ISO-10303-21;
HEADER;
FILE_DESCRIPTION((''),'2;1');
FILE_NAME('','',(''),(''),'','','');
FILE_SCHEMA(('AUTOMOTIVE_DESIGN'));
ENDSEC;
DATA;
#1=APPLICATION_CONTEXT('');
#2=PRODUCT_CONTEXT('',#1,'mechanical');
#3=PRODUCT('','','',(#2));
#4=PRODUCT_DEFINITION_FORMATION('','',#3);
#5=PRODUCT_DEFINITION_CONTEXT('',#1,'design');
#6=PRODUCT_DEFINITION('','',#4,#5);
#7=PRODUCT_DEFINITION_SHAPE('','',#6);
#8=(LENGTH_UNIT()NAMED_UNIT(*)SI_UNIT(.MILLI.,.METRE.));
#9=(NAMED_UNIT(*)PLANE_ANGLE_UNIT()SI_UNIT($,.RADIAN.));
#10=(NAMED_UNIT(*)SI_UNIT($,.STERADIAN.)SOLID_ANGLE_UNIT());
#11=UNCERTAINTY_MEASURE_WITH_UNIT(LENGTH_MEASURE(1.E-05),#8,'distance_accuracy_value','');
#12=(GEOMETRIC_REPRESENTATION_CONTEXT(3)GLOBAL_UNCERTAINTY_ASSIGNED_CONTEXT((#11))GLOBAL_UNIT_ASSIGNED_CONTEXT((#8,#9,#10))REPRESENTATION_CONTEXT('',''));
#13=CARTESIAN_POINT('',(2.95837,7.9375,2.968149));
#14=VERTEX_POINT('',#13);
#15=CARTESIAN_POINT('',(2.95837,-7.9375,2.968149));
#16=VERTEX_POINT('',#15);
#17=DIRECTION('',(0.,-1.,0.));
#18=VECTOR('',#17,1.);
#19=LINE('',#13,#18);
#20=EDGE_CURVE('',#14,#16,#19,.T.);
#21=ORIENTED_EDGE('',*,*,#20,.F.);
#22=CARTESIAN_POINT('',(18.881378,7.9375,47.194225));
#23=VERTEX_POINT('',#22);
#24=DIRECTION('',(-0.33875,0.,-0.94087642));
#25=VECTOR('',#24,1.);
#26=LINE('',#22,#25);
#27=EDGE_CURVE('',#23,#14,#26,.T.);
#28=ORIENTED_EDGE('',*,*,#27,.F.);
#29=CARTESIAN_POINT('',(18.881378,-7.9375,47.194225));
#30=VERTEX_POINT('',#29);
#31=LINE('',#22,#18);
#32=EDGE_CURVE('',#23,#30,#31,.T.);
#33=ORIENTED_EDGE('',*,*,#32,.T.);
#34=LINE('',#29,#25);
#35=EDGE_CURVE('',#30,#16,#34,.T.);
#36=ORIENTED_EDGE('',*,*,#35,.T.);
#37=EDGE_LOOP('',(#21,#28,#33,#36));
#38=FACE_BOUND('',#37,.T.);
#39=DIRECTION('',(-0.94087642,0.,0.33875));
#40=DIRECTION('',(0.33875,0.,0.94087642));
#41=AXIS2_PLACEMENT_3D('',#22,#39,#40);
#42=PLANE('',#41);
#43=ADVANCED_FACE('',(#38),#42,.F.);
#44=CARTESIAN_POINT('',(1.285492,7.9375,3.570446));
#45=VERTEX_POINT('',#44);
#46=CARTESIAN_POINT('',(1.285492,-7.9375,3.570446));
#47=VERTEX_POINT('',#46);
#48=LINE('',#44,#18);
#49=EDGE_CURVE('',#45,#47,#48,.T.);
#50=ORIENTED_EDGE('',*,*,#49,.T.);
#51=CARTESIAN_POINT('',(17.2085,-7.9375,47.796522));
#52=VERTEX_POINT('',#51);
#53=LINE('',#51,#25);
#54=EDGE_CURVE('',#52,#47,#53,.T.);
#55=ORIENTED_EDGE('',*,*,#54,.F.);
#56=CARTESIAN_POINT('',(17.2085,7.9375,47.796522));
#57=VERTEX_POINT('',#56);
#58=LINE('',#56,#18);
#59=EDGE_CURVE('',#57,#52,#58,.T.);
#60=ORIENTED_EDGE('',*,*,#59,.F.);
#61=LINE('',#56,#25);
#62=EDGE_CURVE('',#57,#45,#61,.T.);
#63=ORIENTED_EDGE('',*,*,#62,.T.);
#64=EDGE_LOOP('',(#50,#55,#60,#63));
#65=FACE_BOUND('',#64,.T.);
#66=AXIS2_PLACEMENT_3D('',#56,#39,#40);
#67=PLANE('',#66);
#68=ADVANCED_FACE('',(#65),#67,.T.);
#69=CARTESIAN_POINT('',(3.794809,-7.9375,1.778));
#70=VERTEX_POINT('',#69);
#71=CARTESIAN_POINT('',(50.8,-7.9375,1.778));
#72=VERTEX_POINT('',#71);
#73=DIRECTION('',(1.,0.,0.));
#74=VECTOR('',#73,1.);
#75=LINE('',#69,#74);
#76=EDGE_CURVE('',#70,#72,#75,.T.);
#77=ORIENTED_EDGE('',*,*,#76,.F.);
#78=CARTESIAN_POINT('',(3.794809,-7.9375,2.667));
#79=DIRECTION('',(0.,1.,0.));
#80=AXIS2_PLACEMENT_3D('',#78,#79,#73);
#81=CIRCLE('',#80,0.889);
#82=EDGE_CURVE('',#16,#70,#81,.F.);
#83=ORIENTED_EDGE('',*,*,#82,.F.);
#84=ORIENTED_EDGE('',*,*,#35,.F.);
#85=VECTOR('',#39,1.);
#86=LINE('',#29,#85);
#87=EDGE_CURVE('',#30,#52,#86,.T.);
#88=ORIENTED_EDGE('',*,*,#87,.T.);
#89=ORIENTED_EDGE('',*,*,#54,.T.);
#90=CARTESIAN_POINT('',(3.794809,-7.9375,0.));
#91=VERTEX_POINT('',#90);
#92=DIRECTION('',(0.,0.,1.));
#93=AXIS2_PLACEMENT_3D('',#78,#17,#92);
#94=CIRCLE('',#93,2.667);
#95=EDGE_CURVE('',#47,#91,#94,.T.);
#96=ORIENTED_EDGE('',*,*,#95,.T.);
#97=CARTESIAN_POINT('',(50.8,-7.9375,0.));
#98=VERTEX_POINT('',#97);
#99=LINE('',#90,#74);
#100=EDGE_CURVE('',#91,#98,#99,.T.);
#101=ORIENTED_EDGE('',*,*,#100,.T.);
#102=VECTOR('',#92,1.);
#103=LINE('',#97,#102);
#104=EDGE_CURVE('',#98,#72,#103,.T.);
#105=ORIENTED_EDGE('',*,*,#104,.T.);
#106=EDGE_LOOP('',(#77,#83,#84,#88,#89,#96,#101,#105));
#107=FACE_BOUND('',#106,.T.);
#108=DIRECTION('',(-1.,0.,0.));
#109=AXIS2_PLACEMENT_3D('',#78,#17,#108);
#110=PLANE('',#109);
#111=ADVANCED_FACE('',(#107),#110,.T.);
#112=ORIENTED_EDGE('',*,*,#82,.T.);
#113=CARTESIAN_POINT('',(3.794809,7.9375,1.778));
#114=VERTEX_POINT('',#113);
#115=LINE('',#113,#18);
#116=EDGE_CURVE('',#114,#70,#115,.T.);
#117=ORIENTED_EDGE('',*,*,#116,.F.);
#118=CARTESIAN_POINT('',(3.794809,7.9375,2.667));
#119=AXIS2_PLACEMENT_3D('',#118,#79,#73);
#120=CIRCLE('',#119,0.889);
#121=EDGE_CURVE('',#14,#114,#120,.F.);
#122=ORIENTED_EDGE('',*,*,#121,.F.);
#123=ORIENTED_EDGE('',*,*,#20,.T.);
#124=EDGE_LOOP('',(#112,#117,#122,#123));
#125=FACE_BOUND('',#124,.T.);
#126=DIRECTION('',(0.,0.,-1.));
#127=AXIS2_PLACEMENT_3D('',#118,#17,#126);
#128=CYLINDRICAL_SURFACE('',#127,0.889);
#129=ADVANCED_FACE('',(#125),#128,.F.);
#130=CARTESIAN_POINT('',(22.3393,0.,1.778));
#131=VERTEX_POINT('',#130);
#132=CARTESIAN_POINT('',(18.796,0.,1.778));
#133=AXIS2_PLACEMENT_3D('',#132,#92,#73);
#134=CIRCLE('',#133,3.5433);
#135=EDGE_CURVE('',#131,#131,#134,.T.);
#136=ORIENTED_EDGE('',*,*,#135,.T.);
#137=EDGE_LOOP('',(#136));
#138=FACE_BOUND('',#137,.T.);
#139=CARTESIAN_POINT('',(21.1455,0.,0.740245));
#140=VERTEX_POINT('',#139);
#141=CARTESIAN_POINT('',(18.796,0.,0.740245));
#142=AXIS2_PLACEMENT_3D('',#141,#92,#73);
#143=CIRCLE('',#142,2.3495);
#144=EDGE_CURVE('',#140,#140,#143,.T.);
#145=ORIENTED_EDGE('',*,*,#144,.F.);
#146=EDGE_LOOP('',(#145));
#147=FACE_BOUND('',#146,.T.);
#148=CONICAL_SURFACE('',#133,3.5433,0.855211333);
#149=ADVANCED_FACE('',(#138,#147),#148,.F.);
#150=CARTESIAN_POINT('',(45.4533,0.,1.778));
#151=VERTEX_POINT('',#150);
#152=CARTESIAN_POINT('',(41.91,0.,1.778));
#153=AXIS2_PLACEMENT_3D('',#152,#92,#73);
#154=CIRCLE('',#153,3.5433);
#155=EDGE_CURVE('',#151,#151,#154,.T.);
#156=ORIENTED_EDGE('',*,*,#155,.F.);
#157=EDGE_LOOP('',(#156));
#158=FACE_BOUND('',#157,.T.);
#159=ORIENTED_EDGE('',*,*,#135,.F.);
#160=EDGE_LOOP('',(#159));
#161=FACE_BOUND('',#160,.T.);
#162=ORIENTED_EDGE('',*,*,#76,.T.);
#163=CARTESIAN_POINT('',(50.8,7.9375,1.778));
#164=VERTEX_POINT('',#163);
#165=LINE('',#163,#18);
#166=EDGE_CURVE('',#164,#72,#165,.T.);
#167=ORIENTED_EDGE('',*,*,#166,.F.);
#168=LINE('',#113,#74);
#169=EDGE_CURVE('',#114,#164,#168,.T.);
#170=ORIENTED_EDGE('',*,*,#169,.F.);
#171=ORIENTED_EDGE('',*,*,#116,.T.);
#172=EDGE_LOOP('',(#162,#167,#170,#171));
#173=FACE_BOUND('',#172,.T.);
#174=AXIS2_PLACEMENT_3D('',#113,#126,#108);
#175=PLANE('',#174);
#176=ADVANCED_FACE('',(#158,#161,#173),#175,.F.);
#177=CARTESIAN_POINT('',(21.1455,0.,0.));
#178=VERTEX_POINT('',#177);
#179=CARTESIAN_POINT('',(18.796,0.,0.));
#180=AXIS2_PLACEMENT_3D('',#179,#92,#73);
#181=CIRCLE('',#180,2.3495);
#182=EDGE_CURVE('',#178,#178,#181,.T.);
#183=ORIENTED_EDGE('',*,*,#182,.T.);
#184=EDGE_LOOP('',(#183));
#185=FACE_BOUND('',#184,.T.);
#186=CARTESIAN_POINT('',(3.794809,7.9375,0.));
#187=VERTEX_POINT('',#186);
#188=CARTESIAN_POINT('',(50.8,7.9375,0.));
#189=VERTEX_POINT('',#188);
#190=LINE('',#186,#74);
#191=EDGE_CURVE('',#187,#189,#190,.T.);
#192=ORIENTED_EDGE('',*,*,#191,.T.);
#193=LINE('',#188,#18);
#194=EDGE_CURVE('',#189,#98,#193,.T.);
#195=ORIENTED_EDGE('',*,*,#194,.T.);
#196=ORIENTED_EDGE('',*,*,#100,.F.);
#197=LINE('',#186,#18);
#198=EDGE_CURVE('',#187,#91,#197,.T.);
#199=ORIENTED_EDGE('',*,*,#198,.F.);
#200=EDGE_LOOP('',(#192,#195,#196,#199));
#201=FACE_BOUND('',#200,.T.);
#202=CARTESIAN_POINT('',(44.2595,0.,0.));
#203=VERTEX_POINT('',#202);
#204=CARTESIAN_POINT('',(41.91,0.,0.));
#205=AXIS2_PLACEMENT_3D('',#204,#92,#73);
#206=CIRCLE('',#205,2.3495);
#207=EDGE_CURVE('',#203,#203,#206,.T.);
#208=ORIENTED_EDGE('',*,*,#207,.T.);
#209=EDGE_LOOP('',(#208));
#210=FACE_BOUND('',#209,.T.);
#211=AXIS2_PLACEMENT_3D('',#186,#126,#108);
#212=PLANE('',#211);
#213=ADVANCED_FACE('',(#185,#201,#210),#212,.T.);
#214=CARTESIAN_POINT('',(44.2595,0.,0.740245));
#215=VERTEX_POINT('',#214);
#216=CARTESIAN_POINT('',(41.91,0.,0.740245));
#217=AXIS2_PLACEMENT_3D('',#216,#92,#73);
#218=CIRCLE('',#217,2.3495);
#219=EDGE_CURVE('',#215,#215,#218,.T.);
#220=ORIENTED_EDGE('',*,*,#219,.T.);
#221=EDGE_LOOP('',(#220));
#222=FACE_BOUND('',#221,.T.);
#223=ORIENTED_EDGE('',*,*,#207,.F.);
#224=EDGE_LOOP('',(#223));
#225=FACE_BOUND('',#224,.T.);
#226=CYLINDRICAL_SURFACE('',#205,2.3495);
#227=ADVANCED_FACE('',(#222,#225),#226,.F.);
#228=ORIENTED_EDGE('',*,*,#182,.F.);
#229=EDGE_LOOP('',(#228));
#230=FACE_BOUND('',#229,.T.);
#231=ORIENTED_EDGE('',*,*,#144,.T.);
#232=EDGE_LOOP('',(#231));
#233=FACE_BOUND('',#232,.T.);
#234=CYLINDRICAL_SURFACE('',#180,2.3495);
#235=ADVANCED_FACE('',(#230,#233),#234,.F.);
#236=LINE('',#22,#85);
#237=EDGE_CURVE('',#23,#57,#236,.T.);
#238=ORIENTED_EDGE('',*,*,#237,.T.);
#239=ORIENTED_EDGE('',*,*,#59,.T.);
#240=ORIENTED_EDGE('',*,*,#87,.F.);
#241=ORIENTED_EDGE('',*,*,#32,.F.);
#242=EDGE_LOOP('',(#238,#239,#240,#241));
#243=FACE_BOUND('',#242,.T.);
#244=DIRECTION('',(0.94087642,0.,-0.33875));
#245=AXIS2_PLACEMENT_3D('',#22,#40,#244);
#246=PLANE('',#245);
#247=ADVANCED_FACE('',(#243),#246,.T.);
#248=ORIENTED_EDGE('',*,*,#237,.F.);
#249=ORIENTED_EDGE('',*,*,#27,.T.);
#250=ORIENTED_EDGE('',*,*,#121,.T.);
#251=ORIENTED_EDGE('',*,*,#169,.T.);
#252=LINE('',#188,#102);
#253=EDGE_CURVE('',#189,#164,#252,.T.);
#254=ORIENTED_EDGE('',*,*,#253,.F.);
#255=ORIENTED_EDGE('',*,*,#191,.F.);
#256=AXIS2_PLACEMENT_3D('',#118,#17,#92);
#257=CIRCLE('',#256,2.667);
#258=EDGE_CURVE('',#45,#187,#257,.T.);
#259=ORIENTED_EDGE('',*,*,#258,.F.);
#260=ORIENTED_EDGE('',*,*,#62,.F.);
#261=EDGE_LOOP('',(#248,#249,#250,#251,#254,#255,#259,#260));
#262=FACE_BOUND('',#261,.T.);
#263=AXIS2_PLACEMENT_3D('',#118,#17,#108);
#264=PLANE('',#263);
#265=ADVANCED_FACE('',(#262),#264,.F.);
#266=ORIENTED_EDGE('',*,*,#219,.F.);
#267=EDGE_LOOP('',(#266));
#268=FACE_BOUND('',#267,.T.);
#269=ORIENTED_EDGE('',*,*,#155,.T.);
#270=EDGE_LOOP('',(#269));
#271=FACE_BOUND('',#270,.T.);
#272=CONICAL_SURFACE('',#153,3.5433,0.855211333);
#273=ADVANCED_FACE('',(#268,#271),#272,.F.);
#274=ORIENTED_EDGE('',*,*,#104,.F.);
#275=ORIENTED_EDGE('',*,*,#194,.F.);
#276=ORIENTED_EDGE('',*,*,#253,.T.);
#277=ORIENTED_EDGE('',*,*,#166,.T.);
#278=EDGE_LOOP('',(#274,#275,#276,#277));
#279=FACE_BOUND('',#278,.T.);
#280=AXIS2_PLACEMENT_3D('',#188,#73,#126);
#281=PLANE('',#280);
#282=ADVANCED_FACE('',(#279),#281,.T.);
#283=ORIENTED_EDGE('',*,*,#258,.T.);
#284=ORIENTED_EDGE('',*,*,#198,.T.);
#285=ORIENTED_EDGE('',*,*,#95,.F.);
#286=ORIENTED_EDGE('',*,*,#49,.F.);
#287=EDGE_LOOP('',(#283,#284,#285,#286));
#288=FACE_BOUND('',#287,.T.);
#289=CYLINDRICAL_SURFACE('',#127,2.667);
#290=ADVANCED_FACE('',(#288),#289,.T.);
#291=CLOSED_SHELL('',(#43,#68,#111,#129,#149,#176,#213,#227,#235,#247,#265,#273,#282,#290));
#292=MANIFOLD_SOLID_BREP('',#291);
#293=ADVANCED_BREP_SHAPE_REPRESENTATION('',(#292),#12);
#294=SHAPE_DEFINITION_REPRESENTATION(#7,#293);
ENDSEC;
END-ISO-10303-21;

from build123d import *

# Parameters (mm, degrees)
EXTRUDE_THIN1_START = -7.9375
EXTRUDE_THIN1_DEPTH = 15.875
SKETCH4_R           = 2.3495
EXTRUDE3_DEPTH      = 67.428185443


# Read off the part's stored shape, not the designer's step: Extrude-Thin1
with BuildPart() as part:
    # Extrude-Thin1 outline → Extrude-Thin1 (new body)
    with BuildSketch(Plane(origin=(0, 0, 0), x_dir=(1, 0, 0), z_dir=(0, 1, 0)).offset(EXTRUDE_THIN1_START)):
        with BuildLine():
            Line((3.79480894, -1.778), (50.8, -1.778))
            Line((50.8, -1.778), (50.8, 0))
            Line((50.8, 0), (3.79480894, 0))
            ThreePointArc((3.79480894, 0), (1.6127938, -1.133475), (1.285491529, -3.57044625))
            Line((1.285491529, -3.57044625), (17.2085, -47.79652213))
            Line((17.2085, -47.79652213), (18.881378275, -47.19422463))
            Line((18.881378275, -47.19422463), (2.958369803, -2.96814875))
            ThreePointArc((2.958369803, -2.96814875), (3.06747056, -2.155825), (3.79480894, -1.778))
        make_face()
    extrude(amount=EXTRUDE_THIN1_DEPTH)

    # Sketch4 → Extrude3 (cut, through all)
    with BuildSketch(Plane(origin=(3.556, 0, 1.778), x_dir=(1, 0, 0), z_dir=(0, 0, 1))):
        with Locations((38.354, 0)):
            Circle(SKETCH4_R)
        with Locations((15.24, 0)):
            Circle(SKETCH4_R)
    extrude(amount=-EXTRUDE3_DEPTH, mode=Mode.SUBTRACT)

    # Cut-Extrude1 cone 1 section (through the dimple's axis) → Cut-Extrude1 (revolve, cut)
    with BuildSketch(Plane(origin=(41.91, 0, 1.778), x_dir=(0, -1, 0), z_dir=(1, 0, 0))):
        Polygon((0, 0), (3.5433, 0), (0, 3.080143698), align=None)
    revolve(axis=Axis((41.91, 0, 1.778), (0, 0, -1)), mode=Mode.SUBTRACT)

    # Cut-Extrude1 cone 2 section (through the dimple's axis) → Cut-Extrude1 cone 2 (revolve, cut)
    with BuildSketch(Plane(origin=(18.796, 0, 1.778), x_dir=(0, -1, 0), z_dir=(1, 0, 0))):
        Polygon((0, 0), (3.5433, 0), (0, 3.080143698), align=None)
    revolve(axis=Axis((18.796, 0, 1.778), (0, 0, -1)), mode=Mode.SUBTRACT)


solid = part.part
